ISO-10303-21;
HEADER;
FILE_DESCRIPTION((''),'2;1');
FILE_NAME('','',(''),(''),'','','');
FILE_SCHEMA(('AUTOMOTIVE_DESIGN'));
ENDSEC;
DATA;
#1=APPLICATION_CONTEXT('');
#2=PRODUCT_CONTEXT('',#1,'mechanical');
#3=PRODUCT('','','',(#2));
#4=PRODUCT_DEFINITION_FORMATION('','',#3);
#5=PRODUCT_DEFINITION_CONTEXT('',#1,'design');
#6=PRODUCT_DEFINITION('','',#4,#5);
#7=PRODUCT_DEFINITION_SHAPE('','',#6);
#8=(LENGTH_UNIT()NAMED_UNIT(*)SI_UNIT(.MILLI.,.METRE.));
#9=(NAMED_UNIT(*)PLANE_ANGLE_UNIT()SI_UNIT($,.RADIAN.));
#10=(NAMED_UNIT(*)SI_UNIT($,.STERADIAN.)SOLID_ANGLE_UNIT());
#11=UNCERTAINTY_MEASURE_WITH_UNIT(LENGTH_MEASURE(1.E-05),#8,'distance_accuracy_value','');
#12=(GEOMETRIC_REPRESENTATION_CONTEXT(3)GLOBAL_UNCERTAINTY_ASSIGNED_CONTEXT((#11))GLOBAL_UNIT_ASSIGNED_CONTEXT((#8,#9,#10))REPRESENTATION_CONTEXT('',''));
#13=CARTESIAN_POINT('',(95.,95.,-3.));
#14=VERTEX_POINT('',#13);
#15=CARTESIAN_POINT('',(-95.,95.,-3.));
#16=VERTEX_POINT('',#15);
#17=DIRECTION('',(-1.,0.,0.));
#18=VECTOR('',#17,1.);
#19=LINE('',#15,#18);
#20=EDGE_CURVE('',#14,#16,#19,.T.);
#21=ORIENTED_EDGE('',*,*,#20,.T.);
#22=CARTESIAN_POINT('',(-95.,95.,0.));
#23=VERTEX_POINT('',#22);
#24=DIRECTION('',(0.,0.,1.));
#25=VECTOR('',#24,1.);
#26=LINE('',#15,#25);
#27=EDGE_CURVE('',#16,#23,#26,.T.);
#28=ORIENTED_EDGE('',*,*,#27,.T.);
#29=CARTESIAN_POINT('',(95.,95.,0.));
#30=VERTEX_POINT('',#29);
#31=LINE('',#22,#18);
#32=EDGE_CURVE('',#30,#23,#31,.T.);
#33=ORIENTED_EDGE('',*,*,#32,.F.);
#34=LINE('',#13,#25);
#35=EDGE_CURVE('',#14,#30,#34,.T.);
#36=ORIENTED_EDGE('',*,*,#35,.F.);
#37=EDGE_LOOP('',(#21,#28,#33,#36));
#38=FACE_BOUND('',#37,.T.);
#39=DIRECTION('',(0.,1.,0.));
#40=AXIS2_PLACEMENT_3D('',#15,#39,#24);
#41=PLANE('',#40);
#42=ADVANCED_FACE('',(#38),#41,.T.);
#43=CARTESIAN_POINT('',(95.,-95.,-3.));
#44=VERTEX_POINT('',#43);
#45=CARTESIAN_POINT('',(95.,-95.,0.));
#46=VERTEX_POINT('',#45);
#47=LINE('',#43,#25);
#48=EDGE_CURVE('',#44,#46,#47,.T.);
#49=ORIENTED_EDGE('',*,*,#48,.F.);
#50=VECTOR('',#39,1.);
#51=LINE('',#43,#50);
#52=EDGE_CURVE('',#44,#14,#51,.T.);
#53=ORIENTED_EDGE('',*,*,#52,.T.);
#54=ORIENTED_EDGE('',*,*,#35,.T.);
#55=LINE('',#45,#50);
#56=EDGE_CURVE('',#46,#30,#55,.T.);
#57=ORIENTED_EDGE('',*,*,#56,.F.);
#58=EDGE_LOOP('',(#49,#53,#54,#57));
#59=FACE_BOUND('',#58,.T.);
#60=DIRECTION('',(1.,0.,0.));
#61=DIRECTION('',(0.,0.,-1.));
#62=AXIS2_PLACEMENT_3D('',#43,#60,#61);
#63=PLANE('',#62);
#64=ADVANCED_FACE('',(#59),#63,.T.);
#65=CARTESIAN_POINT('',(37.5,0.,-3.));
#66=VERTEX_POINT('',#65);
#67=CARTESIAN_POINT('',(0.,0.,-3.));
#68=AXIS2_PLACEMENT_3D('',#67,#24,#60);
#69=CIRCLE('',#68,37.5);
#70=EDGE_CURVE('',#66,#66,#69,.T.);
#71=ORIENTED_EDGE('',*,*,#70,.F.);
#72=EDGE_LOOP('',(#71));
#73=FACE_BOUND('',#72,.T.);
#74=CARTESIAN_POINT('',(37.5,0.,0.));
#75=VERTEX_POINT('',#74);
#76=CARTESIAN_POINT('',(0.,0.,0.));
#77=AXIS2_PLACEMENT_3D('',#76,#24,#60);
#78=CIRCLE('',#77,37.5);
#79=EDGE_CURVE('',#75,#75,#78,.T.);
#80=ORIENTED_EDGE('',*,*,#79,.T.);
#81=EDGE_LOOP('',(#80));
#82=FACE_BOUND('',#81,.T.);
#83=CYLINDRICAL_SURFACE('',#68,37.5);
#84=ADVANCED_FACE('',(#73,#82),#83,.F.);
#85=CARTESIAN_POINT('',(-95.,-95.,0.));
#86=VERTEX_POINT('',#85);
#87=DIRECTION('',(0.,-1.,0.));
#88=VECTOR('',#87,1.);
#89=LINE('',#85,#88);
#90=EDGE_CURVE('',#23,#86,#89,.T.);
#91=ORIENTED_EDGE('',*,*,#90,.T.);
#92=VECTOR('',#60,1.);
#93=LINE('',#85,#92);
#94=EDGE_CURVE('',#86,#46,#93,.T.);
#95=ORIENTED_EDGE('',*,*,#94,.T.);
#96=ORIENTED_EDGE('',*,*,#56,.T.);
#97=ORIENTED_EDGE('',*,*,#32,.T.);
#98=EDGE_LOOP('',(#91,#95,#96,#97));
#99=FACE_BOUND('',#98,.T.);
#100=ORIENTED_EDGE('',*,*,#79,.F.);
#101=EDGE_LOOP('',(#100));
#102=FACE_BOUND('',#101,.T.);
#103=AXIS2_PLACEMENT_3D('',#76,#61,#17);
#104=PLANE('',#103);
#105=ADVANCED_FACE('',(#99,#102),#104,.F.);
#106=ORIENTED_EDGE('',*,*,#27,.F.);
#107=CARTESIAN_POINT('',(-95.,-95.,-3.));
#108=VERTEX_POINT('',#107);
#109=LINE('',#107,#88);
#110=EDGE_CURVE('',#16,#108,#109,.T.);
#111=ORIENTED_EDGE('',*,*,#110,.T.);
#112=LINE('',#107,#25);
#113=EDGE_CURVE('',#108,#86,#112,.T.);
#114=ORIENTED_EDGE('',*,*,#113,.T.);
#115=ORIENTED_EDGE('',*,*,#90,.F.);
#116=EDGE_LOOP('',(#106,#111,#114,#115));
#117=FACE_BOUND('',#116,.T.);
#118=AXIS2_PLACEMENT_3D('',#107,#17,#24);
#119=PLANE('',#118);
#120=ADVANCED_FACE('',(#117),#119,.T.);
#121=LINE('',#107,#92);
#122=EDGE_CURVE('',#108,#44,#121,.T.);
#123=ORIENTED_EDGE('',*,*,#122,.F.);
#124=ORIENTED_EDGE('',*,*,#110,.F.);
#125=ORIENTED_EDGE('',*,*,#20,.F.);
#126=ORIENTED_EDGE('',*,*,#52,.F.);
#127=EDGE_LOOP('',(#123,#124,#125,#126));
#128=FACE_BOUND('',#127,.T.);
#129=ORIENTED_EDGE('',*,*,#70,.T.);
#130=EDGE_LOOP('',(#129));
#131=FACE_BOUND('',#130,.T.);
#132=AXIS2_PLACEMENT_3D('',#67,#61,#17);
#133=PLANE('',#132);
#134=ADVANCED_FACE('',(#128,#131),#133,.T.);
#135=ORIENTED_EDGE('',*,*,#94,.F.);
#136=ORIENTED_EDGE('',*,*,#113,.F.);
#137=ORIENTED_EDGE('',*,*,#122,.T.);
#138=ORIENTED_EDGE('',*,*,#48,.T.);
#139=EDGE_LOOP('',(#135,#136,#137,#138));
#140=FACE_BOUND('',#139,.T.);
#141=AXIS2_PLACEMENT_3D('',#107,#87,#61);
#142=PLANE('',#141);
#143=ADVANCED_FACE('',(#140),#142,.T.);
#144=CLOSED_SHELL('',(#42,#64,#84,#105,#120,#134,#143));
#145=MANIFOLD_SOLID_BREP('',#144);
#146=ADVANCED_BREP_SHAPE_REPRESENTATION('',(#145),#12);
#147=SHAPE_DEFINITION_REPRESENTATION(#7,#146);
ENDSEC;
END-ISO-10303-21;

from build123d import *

# Parameters (mm, degrees)
SKETCH1_W        = 190
SKETCH1_H        = 190
SKETCH1_R        = 37.5
MAIN_PLATE_DEPTH = 3


# Sheet-metal steps are written as plain solids
with BuildPart() as part:
    # Sketch1 → Main Plate (new body)
    with BuildSketch(Plane.XY):
        Rectangle(SKETCH1_W, SKETCH1_H)
        Circle(SKETCH1_R, mode=Mode.SUBTRACT)
    extrude(amount=-MAIN_PLATE_DEPTH)


solid = part.part
